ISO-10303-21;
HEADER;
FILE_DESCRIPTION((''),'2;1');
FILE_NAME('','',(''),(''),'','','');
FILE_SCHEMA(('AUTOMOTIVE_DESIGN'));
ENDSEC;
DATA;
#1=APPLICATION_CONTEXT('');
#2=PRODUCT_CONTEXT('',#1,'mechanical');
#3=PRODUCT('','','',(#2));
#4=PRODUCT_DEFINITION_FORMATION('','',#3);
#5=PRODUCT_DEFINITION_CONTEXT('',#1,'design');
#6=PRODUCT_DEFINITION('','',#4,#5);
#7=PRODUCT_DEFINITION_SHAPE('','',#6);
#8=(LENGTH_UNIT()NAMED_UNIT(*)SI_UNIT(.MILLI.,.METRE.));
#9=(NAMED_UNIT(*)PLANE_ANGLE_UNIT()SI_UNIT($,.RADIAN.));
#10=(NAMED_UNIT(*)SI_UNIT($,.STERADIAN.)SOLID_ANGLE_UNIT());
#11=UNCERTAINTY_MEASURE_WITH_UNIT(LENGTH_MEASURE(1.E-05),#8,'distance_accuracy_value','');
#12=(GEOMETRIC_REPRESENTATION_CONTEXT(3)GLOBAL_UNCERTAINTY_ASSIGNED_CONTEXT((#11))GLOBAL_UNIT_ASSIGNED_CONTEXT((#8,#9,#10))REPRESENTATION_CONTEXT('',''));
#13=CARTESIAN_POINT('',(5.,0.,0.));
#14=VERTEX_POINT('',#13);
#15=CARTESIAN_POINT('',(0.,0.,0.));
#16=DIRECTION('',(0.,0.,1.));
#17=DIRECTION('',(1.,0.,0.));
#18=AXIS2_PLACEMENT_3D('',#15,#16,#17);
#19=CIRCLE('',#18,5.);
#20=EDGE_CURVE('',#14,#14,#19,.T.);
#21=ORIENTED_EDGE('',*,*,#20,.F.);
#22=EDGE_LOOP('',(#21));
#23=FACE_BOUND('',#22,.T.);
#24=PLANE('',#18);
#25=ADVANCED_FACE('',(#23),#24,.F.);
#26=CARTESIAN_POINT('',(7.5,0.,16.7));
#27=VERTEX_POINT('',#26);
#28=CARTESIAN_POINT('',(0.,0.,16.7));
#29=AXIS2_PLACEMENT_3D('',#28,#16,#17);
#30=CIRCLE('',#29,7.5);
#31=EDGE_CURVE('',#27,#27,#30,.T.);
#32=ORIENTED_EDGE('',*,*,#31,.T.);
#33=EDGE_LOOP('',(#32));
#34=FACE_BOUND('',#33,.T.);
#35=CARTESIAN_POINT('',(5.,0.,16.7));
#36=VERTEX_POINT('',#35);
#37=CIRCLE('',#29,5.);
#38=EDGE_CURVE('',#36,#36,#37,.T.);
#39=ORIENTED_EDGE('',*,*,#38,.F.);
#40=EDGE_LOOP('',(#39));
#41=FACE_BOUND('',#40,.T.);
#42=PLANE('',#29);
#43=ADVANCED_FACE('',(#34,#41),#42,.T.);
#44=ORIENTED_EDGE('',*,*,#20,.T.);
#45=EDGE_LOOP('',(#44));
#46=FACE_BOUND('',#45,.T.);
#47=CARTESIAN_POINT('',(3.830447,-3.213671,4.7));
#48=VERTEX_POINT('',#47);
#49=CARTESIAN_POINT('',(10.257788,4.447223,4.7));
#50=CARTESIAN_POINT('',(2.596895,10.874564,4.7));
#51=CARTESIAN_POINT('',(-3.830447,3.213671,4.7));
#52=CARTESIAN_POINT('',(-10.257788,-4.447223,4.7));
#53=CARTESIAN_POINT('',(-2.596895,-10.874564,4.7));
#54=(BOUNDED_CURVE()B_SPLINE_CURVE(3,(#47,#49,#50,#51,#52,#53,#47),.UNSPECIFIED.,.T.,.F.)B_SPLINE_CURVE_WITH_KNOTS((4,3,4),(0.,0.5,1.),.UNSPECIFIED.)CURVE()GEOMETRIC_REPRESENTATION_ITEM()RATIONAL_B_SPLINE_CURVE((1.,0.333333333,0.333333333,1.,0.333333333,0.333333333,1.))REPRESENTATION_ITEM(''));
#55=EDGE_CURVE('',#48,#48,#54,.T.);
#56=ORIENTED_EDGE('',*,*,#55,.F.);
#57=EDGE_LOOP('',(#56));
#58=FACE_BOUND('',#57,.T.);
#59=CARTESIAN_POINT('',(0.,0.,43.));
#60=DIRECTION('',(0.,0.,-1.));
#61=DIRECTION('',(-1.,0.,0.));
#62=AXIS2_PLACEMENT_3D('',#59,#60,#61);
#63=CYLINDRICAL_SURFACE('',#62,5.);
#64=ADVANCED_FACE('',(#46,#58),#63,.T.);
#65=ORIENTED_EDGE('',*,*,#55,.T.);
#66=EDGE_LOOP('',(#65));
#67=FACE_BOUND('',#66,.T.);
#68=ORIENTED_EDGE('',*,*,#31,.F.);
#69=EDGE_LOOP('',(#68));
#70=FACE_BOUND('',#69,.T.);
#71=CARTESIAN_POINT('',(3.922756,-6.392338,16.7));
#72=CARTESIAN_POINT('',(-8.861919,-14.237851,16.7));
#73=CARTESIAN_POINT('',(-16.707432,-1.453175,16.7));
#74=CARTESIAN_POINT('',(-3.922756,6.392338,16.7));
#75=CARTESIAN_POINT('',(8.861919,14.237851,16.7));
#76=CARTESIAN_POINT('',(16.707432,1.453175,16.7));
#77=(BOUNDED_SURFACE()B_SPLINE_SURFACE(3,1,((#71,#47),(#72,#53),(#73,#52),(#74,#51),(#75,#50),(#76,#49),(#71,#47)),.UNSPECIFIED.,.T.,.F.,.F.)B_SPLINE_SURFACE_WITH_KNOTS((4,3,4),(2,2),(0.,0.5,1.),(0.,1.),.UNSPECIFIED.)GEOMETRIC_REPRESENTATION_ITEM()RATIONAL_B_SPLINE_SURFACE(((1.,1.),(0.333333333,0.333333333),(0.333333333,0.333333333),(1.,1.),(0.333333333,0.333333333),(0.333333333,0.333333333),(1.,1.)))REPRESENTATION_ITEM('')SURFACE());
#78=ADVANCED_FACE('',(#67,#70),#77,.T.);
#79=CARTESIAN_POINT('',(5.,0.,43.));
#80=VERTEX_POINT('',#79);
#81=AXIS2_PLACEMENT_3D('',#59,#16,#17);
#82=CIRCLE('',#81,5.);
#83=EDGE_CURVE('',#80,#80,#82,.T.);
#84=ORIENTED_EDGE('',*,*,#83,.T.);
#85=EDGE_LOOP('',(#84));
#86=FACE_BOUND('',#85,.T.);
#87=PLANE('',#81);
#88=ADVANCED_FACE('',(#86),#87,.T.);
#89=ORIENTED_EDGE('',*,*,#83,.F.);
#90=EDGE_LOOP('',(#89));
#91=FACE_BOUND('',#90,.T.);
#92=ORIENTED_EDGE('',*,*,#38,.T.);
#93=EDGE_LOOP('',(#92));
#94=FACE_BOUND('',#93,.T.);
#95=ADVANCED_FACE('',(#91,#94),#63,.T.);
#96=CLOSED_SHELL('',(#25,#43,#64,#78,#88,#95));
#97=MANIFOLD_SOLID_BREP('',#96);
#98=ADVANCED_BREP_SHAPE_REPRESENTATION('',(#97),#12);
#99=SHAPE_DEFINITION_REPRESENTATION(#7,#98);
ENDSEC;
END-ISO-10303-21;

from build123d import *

# Parameters (mm, degrees)
SKETCH1_R           = 5
BOSS_EXTRUDE1_DEPTH = 43


with BuildPart() as part:
    # Sketch1 → Boss-Extrude1 (new body)
    with BuildSketch(Plane.XY):
        Circle(SKETCH1_R)
    extrude(amount=BOSS_EXTRUDE1_DEPTH)

    # Loft1: read off the stored shape, not the designer's step
    # Loft1: loft between two sections, ruled curve by curve
    loft1_from = [
        Edge.make_bspline([(3.922756434, -6.392337754, 16.7), (-8.861919074, -14.237850621, 16.7), (-16.707431942, -1.453175113, 16.7), (-3.922756434, 6.392337754, 16.7), (8.861919074, 14.237850621, 16.7), (16.707431942, 1.453175113, 16.7), (3.922756434, -6.392337754, 16.7)], [0, 0, 0, 0, 0.5, 0.5, 0.5, 1, 1, 1, 1], 3, [1, 0.333333333, 0.333333333, 1, 0.333333333, 0.333333333, 1]),
    ]
    loft1_to = [
        Edge.make_bspline([(3.830446581, -3.213670641, 4.7), (-2.5968947, -10.874563804, 4.7), (-10.257787863, -4.447222522, 4.7), (-3.830446581, 3.213670641, 4.7), (2.5968947, 10.874563804, 4.7), (10.257787863, 4.447222522, 4.7), (3.830446581, -3.213670641, 4.7)], [0, 0, 0, 0, 0.5, 0.5, 0.5, 1, 1, 1, 1], 3, [1, 0.333333333, 0.333333333, 1, 0.333333333, 0.333333333, 1]),
    ]
    loft1 = Solid(Shell([*[Face.make_surface_from_curves(loft1_from[k], loft1_to[k]) for k in range(1)], Face(Wire(loft1_from)), Face(Wire(loft1_to))]))
    add(loft1)


solid = part.part
